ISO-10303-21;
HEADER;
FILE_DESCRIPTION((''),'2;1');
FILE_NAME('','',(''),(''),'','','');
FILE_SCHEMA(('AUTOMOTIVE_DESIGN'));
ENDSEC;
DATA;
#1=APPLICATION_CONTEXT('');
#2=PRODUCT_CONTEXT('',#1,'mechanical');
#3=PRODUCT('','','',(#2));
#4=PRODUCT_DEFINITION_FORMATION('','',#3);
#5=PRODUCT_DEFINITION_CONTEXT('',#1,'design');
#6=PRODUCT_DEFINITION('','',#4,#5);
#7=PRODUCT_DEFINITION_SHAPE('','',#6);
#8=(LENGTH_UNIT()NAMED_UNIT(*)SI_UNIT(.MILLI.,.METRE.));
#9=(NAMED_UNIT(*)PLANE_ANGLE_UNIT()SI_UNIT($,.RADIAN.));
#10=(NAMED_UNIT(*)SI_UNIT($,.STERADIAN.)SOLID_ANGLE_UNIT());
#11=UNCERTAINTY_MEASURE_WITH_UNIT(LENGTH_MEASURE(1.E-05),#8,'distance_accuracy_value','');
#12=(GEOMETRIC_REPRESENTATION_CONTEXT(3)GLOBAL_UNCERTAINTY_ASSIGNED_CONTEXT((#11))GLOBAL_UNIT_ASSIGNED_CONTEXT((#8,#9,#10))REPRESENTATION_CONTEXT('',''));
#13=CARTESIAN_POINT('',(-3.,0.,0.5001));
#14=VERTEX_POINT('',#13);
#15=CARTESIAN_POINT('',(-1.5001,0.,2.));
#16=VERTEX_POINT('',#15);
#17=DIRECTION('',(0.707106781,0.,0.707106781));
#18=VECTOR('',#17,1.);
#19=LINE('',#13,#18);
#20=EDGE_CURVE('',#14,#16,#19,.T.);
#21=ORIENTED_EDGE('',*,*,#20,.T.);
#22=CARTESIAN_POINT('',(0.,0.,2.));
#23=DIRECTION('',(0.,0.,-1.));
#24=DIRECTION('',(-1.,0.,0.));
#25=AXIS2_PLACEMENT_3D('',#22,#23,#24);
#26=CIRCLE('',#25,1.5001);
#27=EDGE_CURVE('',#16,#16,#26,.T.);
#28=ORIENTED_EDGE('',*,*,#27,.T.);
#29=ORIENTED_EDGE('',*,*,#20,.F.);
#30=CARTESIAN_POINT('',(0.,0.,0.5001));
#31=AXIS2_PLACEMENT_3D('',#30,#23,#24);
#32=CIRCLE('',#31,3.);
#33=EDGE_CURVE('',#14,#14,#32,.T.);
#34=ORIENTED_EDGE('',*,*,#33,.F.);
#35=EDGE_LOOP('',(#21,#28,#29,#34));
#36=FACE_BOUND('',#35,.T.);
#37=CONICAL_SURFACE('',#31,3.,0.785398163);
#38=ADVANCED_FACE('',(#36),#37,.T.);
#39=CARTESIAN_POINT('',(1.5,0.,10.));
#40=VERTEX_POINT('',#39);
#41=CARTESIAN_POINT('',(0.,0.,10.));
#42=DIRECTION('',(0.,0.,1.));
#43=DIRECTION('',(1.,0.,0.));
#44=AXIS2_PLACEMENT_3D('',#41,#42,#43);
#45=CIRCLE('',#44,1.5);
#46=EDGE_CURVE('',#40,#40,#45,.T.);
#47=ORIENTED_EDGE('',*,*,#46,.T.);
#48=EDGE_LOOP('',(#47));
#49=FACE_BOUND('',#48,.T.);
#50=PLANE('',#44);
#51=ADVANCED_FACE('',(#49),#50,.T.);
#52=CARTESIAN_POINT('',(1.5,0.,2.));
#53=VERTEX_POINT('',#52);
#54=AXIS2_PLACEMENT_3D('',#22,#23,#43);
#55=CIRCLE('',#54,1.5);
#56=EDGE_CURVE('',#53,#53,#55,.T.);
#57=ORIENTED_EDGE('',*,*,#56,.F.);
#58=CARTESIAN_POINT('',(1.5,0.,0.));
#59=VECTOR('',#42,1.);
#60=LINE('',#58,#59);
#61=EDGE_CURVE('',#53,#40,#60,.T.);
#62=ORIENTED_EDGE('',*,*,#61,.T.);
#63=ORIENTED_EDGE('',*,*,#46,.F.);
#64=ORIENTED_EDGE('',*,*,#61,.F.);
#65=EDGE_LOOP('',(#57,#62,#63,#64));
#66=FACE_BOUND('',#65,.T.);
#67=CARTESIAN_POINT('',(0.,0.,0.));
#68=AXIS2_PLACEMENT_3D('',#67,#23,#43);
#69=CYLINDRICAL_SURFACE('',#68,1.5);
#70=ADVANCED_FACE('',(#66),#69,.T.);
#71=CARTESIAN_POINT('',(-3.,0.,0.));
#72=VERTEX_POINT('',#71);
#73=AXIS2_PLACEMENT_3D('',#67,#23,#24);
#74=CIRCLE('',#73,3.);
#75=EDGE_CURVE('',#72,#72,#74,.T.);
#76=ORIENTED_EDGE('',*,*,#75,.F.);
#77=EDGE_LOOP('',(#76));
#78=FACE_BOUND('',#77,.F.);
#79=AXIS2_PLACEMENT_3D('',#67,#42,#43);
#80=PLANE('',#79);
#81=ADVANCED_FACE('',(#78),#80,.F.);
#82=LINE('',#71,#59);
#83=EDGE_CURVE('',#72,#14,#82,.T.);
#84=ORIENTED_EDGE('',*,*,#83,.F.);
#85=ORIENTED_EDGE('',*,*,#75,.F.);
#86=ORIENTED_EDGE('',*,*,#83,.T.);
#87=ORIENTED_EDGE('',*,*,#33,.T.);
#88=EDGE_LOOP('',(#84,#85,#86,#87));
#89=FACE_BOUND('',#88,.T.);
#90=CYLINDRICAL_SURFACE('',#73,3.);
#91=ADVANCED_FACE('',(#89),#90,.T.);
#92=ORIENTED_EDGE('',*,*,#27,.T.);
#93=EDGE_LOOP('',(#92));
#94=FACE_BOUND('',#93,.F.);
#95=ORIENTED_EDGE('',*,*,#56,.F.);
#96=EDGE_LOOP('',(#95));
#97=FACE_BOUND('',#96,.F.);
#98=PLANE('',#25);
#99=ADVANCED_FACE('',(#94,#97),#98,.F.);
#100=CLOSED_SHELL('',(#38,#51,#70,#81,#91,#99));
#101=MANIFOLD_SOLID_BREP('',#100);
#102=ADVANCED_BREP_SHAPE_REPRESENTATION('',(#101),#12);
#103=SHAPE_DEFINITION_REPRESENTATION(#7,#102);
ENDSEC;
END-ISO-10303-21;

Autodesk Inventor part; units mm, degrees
ref_plane "YZ Plane" through (0, 0, 0) normal (1, 0, 0) x (0, 1, 0)
ref_plane "XZ Plane" through (0, 0, 0) normal (0, 1, 0) x (-1, 0, 0)
ref_plane "XY Plane" through (0, 0, 0) normal (0, 0, 1) x (1, 0, 0)
sketch "スケッチ1" plane through (0, 0, 0) normal (0, 0, 1) x (1, 0, 0)
  circle A0 centre (0, 0) radius 1.5
  dimension "d0" = 3
extrude "押し出し1" add sketch "スケッチ1" along normal blind 10
sketch "スケッチ2" plane through (0, 0, 0) normal (0, 0, -1) x (-1, 0, 0)
  circle A0 centre (0, 0) radius 3
  dimension "d3" = 6
extrude "押し出し2" add sketch "スケッチ2" against normal blind 2
thread "ねじ1" size "M3x0.5" class "6g" standard "ANSI Metric M Profile" full length
chamfer "面取り1" distance 1.5 angle 45 1 edges at (3, 0, 2)
properties part number "ネジ皿m3,10" material "鋼、高強度、低合金"
